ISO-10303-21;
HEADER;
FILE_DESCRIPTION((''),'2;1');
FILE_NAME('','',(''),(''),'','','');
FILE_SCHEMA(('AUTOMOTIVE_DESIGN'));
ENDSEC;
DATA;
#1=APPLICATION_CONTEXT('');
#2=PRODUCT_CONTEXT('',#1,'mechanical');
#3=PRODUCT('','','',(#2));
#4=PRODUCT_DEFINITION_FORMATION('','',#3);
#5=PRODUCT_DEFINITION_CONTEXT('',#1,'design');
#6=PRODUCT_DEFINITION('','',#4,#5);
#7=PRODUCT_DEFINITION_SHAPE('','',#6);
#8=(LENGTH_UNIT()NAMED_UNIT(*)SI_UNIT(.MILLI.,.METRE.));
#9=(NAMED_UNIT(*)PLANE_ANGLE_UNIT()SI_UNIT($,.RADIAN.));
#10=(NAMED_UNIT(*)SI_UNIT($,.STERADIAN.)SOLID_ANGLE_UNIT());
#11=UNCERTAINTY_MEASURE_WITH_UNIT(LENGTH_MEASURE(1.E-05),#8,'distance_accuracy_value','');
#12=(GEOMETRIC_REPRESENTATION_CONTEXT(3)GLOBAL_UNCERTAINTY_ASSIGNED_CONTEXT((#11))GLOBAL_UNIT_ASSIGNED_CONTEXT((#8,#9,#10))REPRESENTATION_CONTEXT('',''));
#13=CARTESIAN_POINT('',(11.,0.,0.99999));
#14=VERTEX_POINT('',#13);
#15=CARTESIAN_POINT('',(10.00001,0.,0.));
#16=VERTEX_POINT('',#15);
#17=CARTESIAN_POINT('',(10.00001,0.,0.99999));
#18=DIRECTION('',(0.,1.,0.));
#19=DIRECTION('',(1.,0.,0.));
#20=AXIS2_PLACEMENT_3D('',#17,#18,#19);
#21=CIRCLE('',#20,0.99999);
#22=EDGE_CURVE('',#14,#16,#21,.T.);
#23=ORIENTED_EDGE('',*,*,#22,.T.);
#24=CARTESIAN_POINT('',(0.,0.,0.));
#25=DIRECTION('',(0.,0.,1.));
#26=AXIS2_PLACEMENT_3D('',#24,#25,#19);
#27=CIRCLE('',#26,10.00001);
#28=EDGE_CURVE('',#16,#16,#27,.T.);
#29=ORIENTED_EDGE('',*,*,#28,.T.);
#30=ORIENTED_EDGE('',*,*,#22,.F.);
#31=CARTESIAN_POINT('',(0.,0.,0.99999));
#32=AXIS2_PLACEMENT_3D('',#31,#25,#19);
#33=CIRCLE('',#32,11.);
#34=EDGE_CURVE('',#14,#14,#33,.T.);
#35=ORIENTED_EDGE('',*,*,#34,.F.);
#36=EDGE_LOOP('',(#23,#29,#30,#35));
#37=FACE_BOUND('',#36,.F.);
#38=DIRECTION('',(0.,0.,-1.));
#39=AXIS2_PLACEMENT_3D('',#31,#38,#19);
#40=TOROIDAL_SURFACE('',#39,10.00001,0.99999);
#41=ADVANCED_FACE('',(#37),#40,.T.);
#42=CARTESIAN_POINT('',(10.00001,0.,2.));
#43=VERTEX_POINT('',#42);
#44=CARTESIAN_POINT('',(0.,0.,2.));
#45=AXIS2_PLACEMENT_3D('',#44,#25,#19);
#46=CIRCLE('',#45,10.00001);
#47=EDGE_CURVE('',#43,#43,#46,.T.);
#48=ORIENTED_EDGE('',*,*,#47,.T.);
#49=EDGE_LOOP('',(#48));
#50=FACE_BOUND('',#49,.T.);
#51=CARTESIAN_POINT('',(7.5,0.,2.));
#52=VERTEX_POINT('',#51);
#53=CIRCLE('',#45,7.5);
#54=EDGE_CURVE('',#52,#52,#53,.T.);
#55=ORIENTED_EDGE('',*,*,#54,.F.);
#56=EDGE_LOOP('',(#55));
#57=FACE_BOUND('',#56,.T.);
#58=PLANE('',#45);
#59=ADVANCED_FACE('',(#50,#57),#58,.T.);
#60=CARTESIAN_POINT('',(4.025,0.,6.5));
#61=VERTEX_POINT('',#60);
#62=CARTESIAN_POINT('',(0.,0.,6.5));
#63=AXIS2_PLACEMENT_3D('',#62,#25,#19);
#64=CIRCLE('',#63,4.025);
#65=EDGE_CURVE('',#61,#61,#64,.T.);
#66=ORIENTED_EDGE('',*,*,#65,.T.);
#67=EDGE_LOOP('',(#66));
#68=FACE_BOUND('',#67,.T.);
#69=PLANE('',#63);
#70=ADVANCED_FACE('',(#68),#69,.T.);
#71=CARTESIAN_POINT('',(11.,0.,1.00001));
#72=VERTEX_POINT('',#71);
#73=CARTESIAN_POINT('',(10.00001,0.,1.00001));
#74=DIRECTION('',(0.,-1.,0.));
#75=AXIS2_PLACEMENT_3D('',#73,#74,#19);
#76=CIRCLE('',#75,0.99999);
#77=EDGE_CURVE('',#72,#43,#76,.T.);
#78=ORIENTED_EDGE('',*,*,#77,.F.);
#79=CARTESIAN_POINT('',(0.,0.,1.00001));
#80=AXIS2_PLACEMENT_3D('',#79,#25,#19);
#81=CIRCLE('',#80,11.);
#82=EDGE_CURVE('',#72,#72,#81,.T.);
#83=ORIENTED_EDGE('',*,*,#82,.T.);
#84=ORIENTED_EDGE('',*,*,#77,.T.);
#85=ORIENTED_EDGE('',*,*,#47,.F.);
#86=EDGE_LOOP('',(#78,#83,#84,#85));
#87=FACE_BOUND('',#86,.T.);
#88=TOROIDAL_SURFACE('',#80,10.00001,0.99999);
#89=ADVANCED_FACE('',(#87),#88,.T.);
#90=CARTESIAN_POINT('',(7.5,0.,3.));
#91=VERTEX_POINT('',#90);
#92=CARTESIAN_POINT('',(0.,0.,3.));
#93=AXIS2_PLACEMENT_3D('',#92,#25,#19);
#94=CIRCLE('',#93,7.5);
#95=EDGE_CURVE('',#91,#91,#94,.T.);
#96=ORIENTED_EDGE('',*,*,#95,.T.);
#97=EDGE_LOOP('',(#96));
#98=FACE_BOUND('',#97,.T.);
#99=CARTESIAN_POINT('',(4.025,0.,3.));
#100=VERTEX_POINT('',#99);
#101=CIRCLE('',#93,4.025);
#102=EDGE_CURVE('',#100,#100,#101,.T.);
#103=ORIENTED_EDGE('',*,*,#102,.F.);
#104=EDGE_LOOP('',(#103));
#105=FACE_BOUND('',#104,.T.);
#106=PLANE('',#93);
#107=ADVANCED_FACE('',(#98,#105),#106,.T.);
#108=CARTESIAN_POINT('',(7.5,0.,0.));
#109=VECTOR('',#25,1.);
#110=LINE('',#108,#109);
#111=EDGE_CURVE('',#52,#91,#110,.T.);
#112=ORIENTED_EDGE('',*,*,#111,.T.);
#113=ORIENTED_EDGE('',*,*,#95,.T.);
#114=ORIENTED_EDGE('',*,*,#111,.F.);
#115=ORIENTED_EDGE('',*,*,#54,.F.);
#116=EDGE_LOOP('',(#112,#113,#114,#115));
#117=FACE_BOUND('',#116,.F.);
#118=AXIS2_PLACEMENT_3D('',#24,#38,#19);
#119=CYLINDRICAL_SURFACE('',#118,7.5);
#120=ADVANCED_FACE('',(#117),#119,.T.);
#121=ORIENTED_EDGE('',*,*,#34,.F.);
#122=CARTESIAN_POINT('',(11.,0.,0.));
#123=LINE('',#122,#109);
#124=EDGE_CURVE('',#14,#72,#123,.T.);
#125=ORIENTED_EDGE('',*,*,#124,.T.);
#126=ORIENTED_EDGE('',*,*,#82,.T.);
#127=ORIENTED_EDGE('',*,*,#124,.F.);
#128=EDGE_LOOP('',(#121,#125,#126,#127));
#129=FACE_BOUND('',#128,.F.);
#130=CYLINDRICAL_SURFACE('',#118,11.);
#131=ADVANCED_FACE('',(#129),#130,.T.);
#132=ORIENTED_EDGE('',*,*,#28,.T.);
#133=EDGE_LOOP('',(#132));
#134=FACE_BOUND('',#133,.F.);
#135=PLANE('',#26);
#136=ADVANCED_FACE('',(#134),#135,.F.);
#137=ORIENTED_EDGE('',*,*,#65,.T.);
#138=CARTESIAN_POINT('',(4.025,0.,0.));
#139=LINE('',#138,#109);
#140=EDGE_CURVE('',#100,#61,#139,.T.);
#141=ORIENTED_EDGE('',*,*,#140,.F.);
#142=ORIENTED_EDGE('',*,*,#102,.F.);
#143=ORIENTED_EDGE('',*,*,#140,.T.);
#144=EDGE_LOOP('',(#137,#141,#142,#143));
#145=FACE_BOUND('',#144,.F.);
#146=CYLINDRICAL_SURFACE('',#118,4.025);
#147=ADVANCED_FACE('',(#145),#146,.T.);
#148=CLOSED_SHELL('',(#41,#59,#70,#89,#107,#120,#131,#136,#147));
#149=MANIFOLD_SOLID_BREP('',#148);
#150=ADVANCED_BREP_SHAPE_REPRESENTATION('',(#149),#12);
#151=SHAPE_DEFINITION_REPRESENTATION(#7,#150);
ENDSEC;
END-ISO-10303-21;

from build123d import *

# Parameters (mm, degrees)
F0_R     = 4.025
F1_DEPTH = 6.5
F0_R_2   = 7.5
F2_DEPTH = 3
F0_R_3   = 11
F3_DEPTH = 2
F4_R     = 0.99999


# Not quite as in the source:
# - a fillet or chamfer is up to 0.001 mm smaller than in the source, because OpenCascade refuses the exact size


with BuildPart() as f1:
    # F0 (on Top) → F1 (new body)
    with BuildSketch(Plane.XY):
        Circle(F0_R)
    extrude(amount=F1_DEPTH)

    # F0 (on Top) → F2 (join)
    with BuildSketch(Plane.XY):
        Circle(F0_R_2)
        Circle(F0_R, mode=Mode.SUBTRACT)
    extrude(amount=F2_DEPTH)

    # F0 (on Top) → F3 (join)
    with BuildSketch(Plane.XY):
        Circle(F0_R_3)
        Circle(F0_R_2, mode=Mode.SUBTRACT)
    extrude(amount=F3_DEPTH)

    # F4 (radius 1 in the source; OpenCascade refuses exactly that, so slightly less here)
    f4_edges = [f1.edges().sort_by_distance(p)[0] for p in [
        (-11, 0, 2),
        (-11, 0, 0),
    ]]
    fillet(f4_edges, radius=F4_R)


solid = f1.part
